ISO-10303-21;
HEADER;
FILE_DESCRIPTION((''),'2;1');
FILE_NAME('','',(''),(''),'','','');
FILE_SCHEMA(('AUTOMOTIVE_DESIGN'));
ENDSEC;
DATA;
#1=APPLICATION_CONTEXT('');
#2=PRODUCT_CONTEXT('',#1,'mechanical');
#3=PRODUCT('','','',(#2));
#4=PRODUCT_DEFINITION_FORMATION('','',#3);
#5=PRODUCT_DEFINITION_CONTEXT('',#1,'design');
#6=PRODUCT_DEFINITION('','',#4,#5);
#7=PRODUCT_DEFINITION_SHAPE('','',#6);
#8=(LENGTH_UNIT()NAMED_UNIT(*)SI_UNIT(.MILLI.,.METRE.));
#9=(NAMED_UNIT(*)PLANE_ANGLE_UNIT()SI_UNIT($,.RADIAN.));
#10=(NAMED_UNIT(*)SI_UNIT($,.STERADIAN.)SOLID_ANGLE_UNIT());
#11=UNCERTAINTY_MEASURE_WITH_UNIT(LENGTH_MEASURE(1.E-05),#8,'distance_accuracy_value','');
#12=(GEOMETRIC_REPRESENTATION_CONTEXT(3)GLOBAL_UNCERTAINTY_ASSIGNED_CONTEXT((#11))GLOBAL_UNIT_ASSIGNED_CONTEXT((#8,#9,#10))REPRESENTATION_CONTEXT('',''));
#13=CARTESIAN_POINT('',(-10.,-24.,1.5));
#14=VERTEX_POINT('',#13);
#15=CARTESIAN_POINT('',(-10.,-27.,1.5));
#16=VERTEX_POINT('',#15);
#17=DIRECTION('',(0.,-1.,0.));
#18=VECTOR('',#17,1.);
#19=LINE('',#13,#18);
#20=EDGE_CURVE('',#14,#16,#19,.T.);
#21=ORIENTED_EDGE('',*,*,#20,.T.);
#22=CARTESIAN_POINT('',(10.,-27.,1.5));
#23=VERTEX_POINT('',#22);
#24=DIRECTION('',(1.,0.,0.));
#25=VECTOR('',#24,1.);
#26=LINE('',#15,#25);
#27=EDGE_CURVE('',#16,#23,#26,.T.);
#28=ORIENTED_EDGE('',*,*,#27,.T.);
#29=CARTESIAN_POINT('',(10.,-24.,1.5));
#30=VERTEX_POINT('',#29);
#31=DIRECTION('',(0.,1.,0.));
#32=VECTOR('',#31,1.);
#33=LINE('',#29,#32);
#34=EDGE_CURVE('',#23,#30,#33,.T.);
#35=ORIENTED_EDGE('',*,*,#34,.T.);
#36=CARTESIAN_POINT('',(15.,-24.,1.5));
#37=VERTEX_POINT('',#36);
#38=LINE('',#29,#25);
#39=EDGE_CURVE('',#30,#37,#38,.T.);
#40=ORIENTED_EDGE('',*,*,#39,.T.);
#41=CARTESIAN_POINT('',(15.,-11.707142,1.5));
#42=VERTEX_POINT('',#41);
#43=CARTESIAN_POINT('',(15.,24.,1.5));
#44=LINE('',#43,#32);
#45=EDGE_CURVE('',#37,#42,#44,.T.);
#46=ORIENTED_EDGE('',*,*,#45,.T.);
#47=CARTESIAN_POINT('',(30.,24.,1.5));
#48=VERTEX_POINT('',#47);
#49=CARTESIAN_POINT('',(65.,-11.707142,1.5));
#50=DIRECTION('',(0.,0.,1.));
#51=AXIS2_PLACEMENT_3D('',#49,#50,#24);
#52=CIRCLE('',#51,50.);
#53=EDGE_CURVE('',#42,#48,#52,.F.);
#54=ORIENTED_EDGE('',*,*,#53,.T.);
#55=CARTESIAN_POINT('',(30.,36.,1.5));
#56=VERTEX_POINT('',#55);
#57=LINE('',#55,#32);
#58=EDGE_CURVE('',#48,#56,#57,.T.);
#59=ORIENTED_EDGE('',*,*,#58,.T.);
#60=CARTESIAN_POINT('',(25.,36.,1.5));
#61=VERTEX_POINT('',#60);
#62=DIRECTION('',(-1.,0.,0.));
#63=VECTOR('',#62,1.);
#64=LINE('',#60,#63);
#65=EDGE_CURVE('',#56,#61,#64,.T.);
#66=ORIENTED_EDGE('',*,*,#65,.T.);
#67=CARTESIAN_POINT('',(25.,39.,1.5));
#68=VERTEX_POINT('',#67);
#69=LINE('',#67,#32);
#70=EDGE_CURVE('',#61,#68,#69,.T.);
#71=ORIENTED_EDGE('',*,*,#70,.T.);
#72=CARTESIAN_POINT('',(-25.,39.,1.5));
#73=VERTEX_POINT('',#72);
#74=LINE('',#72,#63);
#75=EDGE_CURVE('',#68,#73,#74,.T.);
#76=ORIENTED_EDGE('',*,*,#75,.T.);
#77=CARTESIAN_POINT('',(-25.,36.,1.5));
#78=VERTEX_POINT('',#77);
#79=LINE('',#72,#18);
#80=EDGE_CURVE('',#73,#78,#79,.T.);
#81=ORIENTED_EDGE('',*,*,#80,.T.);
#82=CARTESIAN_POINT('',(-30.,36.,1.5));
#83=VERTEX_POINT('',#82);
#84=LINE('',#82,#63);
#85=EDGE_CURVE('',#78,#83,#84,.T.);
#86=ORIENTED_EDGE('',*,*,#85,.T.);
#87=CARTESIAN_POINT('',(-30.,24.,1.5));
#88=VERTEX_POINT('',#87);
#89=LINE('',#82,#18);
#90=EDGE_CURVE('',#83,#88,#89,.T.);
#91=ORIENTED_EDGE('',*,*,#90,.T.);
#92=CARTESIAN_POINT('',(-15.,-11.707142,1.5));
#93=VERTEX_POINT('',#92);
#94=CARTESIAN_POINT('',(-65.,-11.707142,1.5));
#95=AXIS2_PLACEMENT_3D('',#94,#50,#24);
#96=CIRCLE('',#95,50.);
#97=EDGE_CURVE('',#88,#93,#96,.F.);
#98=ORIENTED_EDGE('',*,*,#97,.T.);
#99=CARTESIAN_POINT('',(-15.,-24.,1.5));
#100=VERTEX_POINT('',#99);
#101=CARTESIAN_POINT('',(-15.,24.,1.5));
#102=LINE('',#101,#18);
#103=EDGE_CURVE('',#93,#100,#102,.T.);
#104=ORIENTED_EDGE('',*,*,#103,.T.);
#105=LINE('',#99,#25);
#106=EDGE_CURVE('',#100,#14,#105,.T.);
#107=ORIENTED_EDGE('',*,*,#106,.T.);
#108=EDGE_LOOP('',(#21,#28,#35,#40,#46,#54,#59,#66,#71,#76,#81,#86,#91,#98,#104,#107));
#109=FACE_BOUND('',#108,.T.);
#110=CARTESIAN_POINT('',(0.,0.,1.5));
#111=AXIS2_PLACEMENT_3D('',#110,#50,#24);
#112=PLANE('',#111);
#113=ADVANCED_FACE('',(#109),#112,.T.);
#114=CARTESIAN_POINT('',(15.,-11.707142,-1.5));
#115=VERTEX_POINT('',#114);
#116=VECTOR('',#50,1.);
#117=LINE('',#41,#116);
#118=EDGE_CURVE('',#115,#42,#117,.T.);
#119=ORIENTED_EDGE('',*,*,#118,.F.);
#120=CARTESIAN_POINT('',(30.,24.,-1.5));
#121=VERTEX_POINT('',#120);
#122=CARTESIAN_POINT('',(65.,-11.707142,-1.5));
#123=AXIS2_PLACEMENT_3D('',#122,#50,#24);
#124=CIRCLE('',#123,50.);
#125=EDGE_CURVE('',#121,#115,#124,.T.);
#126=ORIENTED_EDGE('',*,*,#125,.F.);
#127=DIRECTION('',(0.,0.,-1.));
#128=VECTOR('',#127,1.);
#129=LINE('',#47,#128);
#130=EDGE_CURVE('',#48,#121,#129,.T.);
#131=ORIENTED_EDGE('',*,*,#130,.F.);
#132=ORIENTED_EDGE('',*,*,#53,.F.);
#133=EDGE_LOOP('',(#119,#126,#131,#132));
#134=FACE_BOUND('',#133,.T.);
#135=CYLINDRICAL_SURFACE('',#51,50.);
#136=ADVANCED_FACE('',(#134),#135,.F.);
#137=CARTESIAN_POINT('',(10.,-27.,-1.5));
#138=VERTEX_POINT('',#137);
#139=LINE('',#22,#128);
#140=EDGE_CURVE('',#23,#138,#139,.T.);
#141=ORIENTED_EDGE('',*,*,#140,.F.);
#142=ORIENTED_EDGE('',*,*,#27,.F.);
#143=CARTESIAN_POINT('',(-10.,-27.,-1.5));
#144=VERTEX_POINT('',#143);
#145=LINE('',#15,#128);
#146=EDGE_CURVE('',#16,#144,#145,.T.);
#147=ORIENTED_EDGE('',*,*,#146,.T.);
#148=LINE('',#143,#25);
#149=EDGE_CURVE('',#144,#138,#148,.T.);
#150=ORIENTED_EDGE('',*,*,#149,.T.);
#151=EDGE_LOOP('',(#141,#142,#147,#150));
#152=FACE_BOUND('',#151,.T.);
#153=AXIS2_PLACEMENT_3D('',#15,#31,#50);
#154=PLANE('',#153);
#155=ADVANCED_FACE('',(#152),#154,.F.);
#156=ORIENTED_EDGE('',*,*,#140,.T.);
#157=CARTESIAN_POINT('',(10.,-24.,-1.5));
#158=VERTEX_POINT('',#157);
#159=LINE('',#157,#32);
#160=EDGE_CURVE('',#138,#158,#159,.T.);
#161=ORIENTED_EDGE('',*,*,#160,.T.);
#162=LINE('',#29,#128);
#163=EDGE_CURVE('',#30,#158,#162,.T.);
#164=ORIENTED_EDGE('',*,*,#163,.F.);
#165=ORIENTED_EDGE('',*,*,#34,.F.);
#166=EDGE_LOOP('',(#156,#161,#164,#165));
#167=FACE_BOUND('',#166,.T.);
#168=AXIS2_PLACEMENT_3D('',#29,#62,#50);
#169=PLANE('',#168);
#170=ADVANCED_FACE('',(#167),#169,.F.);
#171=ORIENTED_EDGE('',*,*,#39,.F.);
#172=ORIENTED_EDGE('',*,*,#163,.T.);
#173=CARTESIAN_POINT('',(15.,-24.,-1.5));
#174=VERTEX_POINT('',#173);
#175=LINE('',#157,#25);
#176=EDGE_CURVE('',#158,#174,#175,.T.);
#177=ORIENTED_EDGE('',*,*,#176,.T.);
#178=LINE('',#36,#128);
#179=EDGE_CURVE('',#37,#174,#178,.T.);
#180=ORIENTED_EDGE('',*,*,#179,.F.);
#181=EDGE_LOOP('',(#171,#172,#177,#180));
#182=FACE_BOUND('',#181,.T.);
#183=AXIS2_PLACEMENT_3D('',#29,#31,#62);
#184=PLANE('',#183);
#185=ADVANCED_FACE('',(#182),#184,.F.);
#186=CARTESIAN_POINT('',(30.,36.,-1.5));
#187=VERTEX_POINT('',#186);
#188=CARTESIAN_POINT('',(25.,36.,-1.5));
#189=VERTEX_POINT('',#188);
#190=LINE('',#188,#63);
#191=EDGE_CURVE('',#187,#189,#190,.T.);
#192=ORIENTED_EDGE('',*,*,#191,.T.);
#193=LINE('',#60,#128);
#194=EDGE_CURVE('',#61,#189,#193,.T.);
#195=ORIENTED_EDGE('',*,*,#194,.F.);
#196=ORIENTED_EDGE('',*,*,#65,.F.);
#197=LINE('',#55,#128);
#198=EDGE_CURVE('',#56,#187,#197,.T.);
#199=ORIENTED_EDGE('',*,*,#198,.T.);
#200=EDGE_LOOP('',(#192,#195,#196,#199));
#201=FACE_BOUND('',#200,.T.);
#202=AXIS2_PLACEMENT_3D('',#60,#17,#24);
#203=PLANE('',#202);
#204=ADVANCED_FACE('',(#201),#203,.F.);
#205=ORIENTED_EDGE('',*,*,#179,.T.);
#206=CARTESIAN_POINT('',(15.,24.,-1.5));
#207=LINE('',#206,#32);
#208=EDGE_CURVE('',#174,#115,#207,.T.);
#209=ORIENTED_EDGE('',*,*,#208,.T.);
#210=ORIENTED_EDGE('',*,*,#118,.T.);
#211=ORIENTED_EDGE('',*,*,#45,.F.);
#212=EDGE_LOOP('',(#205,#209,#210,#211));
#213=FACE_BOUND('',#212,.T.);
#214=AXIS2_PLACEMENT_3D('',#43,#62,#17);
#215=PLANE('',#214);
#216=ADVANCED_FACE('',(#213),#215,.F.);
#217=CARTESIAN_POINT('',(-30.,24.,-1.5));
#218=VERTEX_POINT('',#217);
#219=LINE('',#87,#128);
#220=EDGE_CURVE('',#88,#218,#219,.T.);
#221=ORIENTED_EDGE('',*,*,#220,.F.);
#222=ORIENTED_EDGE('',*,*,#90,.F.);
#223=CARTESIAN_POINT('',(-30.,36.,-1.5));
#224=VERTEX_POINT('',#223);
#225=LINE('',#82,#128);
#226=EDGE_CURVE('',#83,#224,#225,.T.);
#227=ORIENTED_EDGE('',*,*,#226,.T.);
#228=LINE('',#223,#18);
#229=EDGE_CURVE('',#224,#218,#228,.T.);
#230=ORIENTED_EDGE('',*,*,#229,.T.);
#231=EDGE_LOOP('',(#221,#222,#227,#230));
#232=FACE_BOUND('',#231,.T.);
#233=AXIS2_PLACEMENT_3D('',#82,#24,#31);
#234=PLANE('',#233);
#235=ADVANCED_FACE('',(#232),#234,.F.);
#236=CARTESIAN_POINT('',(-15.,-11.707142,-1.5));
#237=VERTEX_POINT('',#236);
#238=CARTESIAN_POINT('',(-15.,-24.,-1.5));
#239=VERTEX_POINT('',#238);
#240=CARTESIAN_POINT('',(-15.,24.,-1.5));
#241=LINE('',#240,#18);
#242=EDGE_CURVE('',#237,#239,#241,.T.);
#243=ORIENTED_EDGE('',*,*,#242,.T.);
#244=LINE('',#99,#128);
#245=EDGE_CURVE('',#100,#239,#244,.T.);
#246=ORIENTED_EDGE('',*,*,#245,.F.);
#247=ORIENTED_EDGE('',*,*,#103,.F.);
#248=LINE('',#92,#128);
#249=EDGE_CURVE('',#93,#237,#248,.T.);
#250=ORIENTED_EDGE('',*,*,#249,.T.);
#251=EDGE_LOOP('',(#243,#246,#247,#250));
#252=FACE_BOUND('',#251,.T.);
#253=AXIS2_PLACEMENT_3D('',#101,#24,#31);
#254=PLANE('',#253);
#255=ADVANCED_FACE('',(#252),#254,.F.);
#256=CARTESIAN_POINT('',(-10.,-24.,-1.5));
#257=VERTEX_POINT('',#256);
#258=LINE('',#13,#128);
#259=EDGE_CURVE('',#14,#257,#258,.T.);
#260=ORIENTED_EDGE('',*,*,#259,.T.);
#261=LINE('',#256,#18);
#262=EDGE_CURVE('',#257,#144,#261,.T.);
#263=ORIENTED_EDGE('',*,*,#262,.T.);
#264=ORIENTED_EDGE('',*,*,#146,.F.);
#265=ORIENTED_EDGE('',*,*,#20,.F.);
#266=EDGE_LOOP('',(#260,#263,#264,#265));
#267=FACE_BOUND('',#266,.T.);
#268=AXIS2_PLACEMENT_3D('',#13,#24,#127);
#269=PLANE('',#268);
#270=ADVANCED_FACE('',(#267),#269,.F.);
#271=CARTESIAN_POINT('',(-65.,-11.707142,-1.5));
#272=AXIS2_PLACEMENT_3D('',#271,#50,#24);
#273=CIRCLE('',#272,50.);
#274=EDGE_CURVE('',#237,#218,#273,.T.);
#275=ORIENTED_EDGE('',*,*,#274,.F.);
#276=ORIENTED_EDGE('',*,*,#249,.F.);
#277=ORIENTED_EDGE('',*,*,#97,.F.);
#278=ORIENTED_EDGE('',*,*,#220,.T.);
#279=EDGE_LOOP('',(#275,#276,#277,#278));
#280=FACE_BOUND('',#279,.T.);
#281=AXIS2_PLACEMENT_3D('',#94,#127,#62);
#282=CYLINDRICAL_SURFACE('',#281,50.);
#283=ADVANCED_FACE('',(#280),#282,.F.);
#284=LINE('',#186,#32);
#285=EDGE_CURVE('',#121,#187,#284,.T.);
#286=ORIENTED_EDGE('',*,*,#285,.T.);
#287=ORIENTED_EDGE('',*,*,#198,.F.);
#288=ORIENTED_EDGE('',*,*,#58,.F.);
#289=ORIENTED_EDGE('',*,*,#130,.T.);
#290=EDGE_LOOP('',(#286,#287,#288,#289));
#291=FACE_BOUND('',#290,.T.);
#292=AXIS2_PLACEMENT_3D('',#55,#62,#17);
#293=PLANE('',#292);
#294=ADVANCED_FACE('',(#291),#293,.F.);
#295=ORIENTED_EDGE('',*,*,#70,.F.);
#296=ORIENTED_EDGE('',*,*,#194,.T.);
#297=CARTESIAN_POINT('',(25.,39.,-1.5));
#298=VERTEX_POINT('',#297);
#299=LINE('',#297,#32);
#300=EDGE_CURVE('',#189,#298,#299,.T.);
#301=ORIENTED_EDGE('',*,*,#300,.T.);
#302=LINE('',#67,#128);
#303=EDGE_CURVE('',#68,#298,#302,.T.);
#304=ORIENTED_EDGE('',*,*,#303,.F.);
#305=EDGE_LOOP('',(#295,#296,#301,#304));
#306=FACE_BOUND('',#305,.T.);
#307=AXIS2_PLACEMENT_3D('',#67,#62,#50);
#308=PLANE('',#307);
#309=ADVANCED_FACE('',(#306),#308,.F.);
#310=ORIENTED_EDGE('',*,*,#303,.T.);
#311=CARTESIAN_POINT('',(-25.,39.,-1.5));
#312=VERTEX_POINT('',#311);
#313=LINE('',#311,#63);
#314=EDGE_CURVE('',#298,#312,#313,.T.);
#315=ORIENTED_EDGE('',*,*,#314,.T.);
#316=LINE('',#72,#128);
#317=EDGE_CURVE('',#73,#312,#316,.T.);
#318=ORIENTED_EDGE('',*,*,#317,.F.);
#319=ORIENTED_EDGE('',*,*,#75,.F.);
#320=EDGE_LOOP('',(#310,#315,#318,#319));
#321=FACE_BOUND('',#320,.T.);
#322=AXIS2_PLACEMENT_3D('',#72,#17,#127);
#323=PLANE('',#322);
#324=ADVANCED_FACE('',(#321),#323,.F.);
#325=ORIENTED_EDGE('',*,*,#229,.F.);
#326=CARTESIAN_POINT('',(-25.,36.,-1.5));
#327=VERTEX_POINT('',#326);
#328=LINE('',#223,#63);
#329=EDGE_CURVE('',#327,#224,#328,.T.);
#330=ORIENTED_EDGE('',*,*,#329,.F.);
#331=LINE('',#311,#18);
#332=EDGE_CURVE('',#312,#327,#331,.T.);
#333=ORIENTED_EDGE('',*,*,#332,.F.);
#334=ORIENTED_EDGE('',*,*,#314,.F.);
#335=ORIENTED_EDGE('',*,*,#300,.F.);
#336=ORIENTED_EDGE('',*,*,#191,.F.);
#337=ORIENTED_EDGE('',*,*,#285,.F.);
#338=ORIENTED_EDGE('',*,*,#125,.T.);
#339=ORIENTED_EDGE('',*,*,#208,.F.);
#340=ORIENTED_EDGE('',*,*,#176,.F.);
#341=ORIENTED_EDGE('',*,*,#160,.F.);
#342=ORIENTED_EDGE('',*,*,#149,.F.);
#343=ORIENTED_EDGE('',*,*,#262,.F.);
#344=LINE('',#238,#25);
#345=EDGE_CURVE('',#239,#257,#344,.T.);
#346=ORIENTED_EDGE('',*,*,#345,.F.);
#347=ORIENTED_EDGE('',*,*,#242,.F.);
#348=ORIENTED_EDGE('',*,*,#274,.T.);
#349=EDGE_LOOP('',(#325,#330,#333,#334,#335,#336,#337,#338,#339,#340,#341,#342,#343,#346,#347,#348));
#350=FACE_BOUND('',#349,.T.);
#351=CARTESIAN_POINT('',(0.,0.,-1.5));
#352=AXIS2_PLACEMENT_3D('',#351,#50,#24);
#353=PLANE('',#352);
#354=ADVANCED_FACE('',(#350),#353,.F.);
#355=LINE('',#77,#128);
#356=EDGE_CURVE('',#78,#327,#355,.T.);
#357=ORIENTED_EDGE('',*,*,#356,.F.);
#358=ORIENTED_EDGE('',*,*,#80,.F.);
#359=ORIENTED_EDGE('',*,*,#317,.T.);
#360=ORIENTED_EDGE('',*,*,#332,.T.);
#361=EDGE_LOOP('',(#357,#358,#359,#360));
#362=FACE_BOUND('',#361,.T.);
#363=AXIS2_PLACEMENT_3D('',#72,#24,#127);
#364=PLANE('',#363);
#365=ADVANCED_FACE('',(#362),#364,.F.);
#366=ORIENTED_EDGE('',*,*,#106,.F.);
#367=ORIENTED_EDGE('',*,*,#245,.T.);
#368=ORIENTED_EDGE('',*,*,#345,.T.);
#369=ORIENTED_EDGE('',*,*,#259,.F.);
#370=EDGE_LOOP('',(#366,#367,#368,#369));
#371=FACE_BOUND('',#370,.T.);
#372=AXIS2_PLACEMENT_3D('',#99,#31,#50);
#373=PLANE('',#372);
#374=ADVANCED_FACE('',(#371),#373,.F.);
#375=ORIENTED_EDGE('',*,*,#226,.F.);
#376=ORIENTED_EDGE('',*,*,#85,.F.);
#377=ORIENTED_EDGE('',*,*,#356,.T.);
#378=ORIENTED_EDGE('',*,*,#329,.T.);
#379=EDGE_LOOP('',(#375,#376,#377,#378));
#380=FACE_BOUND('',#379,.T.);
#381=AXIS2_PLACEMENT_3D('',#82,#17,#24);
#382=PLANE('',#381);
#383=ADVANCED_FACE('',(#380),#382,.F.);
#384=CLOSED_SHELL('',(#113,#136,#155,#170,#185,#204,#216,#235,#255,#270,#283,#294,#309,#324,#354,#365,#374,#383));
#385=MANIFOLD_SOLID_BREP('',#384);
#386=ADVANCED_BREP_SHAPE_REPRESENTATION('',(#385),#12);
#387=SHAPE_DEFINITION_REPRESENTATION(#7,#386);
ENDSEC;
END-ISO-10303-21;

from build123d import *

# Parameters (mm, degrees)
BOSS_EXTRUDE1_DEPTH = 1.5
FILLET1_R           = 50


with BuildPart() as part:
    # Sketch2 → Boss-Extrude1 (new, symmetric)
    with BuildSketch(Plane.XY):
        Polygon((15, 24), (30, 24), (30, 36), (25, 36), (25, 39), (-25, 39), (-25, 36), (-30, 36), (-30, 24), (-15, 24), (-15, -24), (-10, -24), (-10, -27), (10, -27), (10, -24), (15, -24), align=None)
    extrude(amount=BOSS_EXTRUDE1_DEPTH, both=True)

    # Fillet1
    # the kernel refuses this fillet: 50 mm, written as the material it adds along each edge
    with BuildSketch(Plane(origin=(-15, 24, -1.5), x_dir=(0, -1, 0), z_dir=(0, 0, 1))) as fillet1_piece_1:
        with BuildLine():
            CenterArc((35.707142143, -50), FILLET1_R, 90, 45.572995999)
            Line((0, -15), (0, 0))
            Line((0, 0), (35.707142143, 0))
        make_face()
    extrude(amount=3)
    with BuildSketch(Plane(origin=(15, 24, 1.5), x_dir=(1, 0, 0), z_dir=(0, 0, -1))) as fillet1_piece_2:
        with BuildLine():
            CenterArc((50, 35.707142143), FILLET1_R, 180, 45.572995999)
            Line((0, 35.707142143), (0, 0))
            Line((0, 0), (15, 0))
        make_face()
    extrude(amount=3)


solid = part.part
